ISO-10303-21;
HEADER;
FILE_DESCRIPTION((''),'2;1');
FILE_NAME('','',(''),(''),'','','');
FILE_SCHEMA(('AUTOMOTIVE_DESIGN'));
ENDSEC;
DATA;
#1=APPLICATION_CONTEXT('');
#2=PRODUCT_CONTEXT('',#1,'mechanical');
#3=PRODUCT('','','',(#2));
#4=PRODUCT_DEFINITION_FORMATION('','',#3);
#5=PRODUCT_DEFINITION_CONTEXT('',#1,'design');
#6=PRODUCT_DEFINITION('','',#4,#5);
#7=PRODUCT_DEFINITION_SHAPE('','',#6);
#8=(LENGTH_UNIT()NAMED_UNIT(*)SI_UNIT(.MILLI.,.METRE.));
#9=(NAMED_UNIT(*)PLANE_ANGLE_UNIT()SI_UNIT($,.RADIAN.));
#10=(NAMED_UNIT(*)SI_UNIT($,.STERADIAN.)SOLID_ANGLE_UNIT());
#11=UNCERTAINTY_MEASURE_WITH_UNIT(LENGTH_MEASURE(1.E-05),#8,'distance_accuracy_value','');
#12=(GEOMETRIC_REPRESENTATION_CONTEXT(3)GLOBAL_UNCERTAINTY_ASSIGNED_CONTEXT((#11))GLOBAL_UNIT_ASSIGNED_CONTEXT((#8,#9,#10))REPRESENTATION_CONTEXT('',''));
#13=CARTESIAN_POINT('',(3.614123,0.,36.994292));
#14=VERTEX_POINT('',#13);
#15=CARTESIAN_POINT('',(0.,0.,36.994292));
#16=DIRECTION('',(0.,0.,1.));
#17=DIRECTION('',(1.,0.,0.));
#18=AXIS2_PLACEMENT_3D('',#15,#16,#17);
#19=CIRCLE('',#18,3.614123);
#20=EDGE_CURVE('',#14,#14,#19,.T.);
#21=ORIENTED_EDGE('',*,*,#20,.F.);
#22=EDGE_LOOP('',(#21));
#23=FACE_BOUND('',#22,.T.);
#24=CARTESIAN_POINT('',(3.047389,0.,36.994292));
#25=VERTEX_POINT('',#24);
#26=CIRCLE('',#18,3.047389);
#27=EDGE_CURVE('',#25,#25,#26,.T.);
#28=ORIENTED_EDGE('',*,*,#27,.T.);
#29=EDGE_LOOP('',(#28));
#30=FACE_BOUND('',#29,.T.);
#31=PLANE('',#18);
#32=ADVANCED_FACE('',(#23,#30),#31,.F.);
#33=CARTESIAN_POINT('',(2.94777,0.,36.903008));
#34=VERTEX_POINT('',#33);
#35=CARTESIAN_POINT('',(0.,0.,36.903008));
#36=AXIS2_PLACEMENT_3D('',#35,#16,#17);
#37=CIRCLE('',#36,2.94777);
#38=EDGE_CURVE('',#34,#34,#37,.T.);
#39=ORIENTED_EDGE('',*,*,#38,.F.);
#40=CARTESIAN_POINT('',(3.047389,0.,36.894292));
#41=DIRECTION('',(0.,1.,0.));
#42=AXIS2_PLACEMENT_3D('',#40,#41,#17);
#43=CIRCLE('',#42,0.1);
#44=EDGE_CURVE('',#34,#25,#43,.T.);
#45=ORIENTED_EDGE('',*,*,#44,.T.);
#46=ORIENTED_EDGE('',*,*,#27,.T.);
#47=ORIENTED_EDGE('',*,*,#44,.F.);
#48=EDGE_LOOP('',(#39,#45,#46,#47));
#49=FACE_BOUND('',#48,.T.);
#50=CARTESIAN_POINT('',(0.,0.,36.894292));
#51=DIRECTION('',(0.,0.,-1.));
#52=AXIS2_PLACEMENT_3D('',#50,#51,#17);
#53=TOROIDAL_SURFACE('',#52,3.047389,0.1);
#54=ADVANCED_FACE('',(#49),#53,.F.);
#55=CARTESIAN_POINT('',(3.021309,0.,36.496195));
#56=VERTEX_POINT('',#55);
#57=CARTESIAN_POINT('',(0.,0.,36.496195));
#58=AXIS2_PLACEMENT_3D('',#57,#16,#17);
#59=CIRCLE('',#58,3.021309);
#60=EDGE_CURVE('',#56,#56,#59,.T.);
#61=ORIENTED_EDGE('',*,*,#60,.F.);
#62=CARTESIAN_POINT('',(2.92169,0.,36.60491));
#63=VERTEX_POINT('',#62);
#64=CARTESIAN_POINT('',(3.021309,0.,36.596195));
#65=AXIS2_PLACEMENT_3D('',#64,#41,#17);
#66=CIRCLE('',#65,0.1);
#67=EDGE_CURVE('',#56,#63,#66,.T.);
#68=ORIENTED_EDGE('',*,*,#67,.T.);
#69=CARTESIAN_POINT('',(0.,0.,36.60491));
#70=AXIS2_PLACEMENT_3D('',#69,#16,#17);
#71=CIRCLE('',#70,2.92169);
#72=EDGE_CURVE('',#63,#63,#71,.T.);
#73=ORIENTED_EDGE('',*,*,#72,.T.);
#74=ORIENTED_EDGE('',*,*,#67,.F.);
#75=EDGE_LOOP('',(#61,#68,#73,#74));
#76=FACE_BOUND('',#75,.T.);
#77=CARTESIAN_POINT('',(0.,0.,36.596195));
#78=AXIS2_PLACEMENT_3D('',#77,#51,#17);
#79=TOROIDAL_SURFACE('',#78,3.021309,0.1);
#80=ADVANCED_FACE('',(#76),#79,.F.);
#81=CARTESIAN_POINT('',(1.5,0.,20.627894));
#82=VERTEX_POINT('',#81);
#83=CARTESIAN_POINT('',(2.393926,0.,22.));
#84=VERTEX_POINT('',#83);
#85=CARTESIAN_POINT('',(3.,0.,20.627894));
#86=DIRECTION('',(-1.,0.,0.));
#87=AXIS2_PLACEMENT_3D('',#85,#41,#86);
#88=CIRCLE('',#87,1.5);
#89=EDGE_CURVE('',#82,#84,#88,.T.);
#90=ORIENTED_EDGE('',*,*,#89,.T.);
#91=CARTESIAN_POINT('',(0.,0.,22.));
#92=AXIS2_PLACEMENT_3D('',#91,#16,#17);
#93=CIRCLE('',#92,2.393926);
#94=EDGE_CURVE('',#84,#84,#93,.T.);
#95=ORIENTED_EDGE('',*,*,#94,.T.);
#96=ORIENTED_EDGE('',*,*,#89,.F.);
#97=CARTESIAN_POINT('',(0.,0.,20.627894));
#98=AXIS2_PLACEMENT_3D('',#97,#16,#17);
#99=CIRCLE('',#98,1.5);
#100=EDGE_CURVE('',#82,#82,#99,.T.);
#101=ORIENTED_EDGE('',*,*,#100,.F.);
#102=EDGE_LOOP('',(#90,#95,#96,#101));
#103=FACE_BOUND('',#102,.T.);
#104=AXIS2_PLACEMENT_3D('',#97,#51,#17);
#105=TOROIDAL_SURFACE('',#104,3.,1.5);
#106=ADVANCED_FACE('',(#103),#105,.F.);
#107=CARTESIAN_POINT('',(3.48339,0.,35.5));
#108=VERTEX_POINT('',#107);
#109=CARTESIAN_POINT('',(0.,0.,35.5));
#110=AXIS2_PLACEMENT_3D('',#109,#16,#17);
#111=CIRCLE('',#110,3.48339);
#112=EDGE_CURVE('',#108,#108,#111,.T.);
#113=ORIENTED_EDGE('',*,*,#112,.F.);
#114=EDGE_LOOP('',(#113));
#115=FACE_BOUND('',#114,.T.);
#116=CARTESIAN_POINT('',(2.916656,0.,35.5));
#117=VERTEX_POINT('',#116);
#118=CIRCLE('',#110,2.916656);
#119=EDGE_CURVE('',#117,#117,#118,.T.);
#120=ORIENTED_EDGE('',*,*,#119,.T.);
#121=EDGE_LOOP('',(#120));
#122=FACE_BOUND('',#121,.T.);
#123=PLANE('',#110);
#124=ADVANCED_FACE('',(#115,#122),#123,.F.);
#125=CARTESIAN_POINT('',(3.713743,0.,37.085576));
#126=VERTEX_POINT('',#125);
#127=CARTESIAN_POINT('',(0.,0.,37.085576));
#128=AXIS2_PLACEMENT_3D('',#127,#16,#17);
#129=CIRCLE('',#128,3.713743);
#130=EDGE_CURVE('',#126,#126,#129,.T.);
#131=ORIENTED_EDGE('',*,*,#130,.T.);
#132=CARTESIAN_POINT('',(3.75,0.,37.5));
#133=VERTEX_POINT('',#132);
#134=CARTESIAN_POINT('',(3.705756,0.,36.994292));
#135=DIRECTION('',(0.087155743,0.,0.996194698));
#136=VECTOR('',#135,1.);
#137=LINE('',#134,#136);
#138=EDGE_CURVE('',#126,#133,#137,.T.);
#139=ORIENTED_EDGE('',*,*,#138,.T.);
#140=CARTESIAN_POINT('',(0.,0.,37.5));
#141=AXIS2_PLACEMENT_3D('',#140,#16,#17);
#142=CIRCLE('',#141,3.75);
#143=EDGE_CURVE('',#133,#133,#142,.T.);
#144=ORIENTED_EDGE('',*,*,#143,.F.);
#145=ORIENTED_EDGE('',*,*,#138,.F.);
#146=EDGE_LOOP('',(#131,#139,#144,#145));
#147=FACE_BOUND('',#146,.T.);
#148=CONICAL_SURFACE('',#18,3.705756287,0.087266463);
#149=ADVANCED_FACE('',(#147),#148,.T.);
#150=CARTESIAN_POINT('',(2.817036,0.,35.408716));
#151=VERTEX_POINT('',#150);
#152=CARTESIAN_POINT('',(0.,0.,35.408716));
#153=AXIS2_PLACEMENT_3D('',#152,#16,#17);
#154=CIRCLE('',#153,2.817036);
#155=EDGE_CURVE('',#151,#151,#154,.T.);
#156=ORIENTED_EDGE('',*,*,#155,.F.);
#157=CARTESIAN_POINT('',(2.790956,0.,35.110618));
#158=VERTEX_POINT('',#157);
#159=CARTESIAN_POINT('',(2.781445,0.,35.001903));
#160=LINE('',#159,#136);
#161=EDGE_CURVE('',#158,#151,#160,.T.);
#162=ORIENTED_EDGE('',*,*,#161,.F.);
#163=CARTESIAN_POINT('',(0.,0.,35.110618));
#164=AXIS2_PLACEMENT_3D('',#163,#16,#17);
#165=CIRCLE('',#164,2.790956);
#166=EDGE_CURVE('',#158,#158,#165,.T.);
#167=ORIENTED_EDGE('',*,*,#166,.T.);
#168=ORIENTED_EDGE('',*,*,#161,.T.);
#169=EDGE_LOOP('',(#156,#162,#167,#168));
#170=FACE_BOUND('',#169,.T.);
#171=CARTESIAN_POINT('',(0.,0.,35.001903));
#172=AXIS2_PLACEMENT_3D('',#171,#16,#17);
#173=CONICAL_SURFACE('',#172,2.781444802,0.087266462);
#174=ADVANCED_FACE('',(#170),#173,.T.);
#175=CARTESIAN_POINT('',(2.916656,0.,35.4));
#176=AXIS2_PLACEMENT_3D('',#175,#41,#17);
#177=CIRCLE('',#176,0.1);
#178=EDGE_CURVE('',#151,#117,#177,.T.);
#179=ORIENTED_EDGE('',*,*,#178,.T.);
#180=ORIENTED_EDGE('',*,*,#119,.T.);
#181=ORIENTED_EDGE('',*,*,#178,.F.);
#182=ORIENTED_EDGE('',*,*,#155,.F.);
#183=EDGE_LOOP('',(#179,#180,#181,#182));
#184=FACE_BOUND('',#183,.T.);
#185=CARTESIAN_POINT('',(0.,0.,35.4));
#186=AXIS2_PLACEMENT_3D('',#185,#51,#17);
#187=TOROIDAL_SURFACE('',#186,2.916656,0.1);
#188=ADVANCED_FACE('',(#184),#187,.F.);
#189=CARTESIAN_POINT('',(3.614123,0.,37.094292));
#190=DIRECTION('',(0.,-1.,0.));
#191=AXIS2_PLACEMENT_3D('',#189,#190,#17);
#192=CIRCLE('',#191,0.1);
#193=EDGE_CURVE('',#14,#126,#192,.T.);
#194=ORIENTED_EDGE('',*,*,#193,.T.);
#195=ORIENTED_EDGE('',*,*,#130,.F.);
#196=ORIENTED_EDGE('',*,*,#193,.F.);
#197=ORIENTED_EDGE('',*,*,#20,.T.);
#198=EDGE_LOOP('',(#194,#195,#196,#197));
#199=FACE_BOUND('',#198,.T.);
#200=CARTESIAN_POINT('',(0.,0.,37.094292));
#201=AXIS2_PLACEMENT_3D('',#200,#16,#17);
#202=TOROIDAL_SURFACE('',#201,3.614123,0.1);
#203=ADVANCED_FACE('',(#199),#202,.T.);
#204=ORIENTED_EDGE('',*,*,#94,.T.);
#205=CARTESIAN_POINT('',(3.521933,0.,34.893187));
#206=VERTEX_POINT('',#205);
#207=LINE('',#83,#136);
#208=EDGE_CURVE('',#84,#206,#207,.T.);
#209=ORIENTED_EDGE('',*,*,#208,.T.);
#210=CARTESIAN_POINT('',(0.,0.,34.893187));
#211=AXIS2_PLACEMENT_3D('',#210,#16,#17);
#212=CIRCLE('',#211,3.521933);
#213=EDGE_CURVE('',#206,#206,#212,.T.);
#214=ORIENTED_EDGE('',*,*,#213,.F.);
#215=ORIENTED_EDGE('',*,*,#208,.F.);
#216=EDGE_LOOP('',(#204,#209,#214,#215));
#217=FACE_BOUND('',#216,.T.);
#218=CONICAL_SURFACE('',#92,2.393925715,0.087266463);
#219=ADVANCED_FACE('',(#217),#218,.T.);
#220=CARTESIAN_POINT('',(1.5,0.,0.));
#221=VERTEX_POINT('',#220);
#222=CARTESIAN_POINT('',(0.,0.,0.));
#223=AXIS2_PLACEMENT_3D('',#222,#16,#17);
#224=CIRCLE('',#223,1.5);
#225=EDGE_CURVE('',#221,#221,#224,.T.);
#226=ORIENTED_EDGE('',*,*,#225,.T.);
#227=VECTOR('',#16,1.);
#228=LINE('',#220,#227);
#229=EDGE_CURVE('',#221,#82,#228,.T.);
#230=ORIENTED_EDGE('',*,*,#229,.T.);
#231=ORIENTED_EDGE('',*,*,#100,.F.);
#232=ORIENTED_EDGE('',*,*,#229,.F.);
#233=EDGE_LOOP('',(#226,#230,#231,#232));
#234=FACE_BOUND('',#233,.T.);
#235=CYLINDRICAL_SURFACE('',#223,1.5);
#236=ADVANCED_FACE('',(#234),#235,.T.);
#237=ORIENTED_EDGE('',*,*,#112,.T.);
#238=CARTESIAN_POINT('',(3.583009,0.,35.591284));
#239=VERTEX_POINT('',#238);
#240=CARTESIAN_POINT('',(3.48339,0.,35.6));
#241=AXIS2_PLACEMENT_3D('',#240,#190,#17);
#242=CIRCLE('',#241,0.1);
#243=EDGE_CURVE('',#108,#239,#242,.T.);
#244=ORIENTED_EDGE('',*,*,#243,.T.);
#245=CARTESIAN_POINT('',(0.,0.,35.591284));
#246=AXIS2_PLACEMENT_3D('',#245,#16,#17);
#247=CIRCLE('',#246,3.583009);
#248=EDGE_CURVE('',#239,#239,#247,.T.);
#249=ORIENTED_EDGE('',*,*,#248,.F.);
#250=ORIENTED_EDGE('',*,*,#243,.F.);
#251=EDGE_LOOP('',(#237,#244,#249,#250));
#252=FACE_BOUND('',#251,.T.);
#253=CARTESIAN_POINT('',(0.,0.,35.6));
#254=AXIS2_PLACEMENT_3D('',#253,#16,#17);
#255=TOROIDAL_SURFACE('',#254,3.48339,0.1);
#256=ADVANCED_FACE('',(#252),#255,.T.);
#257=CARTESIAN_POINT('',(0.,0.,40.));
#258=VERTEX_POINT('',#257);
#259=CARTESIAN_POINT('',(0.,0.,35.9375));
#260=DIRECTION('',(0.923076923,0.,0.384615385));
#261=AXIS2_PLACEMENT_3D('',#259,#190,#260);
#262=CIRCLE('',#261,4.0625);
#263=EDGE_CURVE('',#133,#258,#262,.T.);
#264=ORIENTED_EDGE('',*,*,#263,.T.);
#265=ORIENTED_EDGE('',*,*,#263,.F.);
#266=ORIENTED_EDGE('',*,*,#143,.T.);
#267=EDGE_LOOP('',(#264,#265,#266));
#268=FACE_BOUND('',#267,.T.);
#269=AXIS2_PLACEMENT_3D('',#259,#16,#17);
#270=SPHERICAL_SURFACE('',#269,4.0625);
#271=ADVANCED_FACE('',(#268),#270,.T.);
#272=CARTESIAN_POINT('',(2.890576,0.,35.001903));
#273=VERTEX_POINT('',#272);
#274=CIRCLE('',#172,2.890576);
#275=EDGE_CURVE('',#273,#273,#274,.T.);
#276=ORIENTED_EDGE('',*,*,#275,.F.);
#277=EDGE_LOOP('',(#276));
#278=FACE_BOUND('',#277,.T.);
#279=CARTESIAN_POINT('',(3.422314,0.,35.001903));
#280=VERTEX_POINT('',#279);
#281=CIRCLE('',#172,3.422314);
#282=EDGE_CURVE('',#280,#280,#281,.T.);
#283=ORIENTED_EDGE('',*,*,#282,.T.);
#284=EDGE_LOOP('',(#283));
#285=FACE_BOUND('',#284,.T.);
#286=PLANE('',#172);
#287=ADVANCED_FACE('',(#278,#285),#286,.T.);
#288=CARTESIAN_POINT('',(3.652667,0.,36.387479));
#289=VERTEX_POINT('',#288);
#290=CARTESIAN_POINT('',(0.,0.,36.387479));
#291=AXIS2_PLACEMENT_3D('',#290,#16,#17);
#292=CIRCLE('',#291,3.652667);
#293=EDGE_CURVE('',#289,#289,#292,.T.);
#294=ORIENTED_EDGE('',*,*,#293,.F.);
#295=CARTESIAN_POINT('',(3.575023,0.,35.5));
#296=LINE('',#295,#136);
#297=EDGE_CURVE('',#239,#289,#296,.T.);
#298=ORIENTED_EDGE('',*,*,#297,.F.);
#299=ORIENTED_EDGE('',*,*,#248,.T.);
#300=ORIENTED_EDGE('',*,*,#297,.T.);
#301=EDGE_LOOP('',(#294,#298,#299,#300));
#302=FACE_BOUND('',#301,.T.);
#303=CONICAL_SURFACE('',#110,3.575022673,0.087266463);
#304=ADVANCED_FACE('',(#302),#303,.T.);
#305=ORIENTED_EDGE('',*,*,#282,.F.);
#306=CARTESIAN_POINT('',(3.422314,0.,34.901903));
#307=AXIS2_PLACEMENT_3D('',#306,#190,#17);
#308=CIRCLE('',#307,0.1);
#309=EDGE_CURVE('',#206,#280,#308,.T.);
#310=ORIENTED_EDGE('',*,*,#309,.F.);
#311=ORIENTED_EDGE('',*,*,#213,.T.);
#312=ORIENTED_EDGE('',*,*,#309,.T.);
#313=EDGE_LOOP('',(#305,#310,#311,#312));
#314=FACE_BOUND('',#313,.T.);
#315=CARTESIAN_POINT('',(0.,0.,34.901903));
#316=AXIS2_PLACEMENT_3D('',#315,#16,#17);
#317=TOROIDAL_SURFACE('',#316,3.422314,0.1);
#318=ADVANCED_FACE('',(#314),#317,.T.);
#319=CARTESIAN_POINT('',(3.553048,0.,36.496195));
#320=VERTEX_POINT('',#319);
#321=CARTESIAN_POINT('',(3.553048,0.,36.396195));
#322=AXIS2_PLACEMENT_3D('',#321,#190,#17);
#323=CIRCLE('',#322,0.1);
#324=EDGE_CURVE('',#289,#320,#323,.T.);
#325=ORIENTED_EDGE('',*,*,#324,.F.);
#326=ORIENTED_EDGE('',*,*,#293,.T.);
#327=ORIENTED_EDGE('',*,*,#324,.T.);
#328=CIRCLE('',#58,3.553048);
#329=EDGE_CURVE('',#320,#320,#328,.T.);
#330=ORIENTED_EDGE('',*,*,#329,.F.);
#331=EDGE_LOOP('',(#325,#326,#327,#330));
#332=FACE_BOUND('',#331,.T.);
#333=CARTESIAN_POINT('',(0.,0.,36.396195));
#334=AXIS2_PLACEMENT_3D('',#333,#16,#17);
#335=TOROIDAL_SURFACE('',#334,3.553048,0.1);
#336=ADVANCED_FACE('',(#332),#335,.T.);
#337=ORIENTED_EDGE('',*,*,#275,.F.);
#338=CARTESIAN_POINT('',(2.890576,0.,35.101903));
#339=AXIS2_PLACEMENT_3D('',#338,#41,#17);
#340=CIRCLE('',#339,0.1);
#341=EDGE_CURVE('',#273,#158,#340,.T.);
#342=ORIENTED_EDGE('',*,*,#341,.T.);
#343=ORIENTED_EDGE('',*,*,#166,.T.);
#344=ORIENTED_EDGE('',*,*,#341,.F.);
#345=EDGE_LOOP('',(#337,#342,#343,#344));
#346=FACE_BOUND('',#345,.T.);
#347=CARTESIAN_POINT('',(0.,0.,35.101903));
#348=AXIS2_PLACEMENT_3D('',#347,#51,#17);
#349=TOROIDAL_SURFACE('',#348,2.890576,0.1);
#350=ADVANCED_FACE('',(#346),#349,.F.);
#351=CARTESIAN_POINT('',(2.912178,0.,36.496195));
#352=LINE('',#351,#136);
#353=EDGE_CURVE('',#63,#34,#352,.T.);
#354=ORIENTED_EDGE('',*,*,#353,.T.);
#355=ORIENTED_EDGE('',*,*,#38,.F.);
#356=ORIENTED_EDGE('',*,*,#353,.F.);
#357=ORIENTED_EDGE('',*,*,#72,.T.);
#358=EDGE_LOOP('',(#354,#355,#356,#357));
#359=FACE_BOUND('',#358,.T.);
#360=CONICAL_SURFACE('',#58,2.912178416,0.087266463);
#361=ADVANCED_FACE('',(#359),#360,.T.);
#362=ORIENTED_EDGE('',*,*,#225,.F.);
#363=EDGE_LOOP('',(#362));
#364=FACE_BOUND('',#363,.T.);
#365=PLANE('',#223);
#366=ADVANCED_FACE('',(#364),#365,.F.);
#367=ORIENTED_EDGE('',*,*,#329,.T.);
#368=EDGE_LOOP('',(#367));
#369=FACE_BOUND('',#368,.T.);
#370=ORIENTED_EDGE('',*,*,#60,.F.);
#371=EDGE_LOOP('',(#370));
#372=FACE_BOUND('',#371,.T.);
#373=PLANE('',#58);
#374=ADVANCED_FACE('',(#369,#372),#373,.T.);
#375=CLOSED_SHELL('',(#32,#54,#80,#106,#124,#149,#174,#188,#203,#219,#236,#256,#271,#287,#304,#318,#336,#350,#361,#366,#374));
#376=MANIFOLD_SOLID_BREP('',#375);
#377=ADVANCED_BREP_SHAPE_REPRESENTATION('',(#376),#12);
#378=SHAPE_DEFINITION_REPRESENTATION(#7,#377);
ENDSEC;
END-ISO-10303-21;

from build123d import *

# Parameters (mm, degrees)
F3_R = 0.1


# Not quite as in the source:
# - a fillet or chamfer that OpenCascade refuses, or shapes differently, is made with other operations: its cross-section is extruded or revolved along the edge and cut away or added


with BuildPart() as f1:
    # F0 (on Front) → F1 (revolve)
    with BuildSketch(Plane.XZ):
        with BuildLine():
            Line((0, 21.6683513987), (0, 0))
            Line((0, 0), (1.5, 0))
            Line((1.5, 0), (1.5, 22))
            Line((1.5, 22), (2.3939257153, 22))
            Line((2.3939257153, 22), (3.5314448016, 35.001902651))
            Line((3.5314448016, 35.001902651), (2.7814448016, 35.001902651))
            Line((2.7814448016, 35.001902651), (2.8250226729, 35.5))
            Line((2.8250226729, 35.5), (3.5750226729, 35.5))
            Line((3.5750226729, 35.5), (3.6621784157, 36.4961946981))
            Line((3.6621784157, 36.4961946981), (2.9121784157, 36.4961946981))
            Line((2.9121784157, 36.4961946981), (2.9557562871, 36.9942920471))
            Line((2.9557562871, 36.9942920471), (3.7057562871, 36.9942920471))
            Line((3.7057562871, 36.9942920471), (3.75, 37.5))
            ThreePointArc((3.75, 37.5), (2.2534695472, 39.3177043207), (0, 40))
            Line((0, 40), (0, 37.5))
            Line((0, 37.5), (0, 21.6683513987))
        make_face()
    revolve(axis=Axis((0, 0, 29.5841756993), (0, 0, 1)))

    # F2: fillet of radius 1.5 on 1 edges, made by hand

    # F2_s1 → F2_t2 (revolve)
    with BuildSketch(Plane.XZ):
        with BuildLine():
            ThreePointArc((1.5, 20.627894333), (1.7431962311, 21.4467009564), (2.3939257153, 22))
            Line((2.3939257153, 22), (2.3818042297, 22.0274421133))
            ThreePointArc((2.3818042297, 22.0274421133), (1.9469628577, 22.03), (1.5, 22.03))
            Line((1.5, 22.03), (1.47, 22))
            Line((1.47, 22), (1.47, 20.627894333))
            Line((1.47, 20.627894333), (1.5, 20.627894333))
        make_face()
    revolve(axis=Axis((0, 0, 22), (0, 0, 1)))

    # F3
    f3_edges = [f1.edges().sort_by_distance(p)[0] for p in [
        (-2.825023, 0, 35.5),
        (-2.781445, 0, 35.001903),
        (-3.531445, 0, 35.001903),
        (-3.575023, 0, 35.5),
        (-2.912178, 0, 36.496195),
        (-2.955756, 0, 36.994292),
        (2.933967, 0, 36.745243),
        (-3.662178, 0, 36.496195),
        (-3.705756, 0, 36.994292),
    ]]
    fillet(f3_edges, radius=F3_R)


solid = f1.part
